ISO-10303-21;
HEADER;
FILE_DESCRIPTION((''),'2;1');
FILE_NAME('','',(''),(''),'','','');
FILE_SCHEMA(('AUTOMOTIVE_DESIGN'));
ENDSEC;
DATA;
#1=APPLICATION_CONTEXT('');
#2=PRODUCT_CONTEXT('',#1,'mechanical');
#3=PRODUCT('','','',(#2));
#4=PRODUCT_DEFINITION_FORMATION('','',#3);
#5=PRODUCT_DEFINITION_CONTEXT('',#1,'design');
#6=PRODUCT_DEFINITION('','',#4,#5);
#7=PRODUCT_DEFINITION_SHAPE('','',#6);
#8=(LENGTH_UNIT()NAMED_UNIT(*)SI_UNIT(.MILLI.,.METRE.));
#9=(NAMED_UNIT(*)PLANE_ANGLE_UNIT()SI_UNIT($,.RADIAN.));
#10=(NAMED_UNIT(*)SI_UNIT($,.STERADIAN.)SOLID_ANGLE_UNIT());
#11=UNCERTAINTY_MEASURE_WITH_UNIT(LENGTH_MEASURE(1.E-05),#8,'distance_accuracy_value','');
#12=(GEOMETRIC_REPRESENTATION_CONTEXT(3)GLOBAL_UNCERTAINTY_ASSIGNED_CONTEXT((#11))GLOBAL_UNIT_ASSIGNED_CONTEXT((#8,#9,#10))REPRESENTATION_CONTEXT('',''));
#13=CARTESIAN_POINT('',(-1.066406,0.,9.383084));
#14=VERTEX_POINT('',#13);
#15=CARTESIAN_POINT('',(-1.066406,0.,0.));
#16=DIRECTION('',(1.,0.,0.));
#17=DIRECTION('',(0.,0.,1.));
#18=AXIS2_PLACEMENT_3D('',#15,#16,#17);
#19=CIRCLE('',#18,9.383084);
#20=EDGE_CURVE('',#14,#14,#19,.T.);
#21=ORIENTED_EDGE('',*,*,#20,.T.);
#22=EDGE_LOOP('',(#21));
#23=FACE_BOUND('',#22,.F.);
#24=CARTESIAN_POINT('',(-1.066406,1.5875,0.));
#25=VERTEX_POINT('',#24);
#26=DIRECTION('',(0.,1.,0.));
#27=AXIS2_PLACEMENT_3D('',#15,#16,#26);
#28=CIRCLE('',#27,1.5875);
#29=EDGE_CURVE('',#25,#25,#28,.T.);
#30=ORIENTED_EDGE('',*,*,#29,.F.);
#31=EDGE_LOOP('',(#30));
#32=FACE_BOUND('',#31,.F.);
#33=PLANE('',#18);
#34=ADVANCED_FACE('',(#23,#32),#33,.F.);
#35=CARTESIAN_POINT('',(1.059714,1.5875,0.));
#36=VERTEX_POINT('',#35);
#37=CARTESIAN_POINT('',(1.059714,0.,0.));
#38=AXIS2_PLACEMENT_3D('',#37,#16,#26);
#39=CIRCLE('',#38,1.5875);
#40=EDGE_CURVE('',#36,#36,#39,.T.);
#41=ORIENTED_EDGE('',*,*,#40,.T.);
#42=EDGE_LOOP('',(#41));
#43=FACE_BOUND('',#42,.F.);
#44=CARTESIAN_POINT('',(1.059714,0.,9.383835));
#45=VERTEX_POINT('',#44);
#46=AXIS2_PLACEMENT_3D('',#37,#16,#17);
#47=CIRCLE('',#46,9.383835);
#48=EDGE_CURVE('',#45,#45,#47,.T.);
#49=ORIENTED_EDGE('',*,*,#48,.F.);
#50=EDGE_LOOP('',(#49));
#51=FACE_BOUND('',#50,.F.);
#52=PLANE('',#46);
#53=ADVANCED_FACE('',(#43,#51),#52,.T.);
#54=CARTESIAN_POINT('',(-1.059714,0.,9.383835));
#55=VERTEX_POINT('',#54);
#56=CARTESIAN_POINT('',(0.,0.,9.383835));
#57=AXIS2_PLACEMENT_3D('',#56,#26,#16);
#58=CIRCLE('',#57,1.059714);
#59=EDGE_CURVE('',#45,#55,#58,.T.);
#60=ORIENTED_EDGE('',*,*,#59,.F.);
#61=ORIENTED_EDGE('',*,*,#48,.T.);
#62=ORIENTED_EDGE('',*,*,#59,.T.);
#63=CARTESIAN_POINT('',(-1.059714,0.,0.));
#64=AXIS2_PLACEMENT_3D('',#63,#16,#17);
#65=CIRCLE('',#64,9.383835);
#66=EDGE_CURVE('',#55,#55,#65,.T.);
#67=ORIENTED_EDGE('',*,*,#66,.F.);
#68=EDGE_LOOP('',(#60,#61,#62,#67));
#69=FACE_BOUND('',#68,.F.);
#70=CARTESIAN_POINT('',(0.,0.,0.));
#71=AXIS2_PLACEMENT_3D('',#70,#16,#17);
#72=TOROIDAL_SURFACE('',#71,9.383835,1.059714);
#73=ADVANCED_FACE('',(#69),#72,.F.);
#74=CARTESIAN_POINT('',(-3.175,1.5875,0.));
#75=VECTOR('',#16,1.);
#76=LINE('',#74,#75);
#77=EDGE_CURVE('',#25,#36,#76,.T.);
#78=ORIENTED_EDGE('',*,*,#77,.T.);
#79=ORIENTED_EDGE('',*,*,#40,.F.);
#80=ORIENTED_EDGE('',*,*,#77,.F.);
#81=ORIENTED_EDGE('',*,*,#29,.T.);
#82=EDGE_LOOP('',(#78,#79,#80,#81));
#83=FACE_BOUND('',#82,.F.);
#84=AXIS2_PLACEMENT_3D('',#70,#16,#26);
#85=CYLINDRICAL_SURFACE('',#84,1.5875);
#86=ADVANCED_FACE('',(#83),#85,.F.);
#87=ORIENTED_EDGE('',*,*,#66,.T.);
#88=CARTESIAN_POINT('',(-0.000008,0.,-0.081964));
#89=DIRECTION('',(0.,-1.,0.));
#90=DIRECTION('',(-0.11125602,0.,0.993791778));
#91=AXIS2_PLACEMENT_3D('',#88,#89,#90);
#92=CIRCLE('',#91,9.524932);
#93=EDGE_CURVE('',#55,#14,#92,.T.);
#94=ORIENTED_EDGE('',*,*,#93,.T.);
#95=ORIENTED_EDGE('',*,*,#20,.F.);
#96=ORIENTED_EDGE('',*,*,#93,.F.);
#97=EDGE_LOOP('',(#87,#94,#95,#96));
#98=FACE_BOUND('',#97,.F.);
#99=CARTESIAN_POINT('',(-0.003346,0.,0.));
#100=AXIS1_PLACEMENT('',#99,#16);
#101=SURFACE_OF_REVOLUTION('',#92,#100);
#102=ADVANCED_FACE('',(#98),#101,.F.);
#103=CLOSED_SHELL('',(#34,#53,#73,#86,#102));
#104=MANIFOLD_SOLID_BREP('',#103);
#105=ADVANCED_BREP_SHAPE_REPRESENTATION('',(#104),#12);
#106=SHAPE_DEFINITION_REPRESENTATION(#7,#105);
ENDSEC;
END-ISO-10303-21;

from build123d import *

# Parameters (mm, degrees)
F2_R     = 1.5875
F3_DEPTH = 3.175


# Not quite as in the source:
# - a length typed as a fraction of an inch, garbled in the dataset ("3 / 203.2 mm" for 3/8 in), is restored


with BuildPart() as f1:
    # F0 (on Front) → F1 (revolve)
    with BuildSketch(Plane.XZ):
        with BuildLine():
            Line((1.059713671, 0), (1.059713671, 9.3838354061))
            ThreePointArc((1.059713671, 9.3838354061), (1e-10, 8.3241217351), (-1.059713671, 9.3838354058))
            ThreePointArc((-1.0597136683, 9.3838354055), (-1.0630601457, 9.3834601649), (-1.0664064903, 9.3830837412))
            Line((-1.0664064903, 9.3830837412), (-1.0664064903, 0))
            Line((-1.0664064903, 0), (1.059713671, 0))
        make_face()
    revolve(axis=Axis((-0.0033464096, 0, 0), (1, 0, 0)))

    # F2 (on Right) → F3 (cut, symmetric)
    with BuildSketch(Plane.YZ):
        Circle(F2_R)
    extrude(amount=F3_DEPTH, both=True, mode=Mode.SUBTRACT)


solid = f1.part
